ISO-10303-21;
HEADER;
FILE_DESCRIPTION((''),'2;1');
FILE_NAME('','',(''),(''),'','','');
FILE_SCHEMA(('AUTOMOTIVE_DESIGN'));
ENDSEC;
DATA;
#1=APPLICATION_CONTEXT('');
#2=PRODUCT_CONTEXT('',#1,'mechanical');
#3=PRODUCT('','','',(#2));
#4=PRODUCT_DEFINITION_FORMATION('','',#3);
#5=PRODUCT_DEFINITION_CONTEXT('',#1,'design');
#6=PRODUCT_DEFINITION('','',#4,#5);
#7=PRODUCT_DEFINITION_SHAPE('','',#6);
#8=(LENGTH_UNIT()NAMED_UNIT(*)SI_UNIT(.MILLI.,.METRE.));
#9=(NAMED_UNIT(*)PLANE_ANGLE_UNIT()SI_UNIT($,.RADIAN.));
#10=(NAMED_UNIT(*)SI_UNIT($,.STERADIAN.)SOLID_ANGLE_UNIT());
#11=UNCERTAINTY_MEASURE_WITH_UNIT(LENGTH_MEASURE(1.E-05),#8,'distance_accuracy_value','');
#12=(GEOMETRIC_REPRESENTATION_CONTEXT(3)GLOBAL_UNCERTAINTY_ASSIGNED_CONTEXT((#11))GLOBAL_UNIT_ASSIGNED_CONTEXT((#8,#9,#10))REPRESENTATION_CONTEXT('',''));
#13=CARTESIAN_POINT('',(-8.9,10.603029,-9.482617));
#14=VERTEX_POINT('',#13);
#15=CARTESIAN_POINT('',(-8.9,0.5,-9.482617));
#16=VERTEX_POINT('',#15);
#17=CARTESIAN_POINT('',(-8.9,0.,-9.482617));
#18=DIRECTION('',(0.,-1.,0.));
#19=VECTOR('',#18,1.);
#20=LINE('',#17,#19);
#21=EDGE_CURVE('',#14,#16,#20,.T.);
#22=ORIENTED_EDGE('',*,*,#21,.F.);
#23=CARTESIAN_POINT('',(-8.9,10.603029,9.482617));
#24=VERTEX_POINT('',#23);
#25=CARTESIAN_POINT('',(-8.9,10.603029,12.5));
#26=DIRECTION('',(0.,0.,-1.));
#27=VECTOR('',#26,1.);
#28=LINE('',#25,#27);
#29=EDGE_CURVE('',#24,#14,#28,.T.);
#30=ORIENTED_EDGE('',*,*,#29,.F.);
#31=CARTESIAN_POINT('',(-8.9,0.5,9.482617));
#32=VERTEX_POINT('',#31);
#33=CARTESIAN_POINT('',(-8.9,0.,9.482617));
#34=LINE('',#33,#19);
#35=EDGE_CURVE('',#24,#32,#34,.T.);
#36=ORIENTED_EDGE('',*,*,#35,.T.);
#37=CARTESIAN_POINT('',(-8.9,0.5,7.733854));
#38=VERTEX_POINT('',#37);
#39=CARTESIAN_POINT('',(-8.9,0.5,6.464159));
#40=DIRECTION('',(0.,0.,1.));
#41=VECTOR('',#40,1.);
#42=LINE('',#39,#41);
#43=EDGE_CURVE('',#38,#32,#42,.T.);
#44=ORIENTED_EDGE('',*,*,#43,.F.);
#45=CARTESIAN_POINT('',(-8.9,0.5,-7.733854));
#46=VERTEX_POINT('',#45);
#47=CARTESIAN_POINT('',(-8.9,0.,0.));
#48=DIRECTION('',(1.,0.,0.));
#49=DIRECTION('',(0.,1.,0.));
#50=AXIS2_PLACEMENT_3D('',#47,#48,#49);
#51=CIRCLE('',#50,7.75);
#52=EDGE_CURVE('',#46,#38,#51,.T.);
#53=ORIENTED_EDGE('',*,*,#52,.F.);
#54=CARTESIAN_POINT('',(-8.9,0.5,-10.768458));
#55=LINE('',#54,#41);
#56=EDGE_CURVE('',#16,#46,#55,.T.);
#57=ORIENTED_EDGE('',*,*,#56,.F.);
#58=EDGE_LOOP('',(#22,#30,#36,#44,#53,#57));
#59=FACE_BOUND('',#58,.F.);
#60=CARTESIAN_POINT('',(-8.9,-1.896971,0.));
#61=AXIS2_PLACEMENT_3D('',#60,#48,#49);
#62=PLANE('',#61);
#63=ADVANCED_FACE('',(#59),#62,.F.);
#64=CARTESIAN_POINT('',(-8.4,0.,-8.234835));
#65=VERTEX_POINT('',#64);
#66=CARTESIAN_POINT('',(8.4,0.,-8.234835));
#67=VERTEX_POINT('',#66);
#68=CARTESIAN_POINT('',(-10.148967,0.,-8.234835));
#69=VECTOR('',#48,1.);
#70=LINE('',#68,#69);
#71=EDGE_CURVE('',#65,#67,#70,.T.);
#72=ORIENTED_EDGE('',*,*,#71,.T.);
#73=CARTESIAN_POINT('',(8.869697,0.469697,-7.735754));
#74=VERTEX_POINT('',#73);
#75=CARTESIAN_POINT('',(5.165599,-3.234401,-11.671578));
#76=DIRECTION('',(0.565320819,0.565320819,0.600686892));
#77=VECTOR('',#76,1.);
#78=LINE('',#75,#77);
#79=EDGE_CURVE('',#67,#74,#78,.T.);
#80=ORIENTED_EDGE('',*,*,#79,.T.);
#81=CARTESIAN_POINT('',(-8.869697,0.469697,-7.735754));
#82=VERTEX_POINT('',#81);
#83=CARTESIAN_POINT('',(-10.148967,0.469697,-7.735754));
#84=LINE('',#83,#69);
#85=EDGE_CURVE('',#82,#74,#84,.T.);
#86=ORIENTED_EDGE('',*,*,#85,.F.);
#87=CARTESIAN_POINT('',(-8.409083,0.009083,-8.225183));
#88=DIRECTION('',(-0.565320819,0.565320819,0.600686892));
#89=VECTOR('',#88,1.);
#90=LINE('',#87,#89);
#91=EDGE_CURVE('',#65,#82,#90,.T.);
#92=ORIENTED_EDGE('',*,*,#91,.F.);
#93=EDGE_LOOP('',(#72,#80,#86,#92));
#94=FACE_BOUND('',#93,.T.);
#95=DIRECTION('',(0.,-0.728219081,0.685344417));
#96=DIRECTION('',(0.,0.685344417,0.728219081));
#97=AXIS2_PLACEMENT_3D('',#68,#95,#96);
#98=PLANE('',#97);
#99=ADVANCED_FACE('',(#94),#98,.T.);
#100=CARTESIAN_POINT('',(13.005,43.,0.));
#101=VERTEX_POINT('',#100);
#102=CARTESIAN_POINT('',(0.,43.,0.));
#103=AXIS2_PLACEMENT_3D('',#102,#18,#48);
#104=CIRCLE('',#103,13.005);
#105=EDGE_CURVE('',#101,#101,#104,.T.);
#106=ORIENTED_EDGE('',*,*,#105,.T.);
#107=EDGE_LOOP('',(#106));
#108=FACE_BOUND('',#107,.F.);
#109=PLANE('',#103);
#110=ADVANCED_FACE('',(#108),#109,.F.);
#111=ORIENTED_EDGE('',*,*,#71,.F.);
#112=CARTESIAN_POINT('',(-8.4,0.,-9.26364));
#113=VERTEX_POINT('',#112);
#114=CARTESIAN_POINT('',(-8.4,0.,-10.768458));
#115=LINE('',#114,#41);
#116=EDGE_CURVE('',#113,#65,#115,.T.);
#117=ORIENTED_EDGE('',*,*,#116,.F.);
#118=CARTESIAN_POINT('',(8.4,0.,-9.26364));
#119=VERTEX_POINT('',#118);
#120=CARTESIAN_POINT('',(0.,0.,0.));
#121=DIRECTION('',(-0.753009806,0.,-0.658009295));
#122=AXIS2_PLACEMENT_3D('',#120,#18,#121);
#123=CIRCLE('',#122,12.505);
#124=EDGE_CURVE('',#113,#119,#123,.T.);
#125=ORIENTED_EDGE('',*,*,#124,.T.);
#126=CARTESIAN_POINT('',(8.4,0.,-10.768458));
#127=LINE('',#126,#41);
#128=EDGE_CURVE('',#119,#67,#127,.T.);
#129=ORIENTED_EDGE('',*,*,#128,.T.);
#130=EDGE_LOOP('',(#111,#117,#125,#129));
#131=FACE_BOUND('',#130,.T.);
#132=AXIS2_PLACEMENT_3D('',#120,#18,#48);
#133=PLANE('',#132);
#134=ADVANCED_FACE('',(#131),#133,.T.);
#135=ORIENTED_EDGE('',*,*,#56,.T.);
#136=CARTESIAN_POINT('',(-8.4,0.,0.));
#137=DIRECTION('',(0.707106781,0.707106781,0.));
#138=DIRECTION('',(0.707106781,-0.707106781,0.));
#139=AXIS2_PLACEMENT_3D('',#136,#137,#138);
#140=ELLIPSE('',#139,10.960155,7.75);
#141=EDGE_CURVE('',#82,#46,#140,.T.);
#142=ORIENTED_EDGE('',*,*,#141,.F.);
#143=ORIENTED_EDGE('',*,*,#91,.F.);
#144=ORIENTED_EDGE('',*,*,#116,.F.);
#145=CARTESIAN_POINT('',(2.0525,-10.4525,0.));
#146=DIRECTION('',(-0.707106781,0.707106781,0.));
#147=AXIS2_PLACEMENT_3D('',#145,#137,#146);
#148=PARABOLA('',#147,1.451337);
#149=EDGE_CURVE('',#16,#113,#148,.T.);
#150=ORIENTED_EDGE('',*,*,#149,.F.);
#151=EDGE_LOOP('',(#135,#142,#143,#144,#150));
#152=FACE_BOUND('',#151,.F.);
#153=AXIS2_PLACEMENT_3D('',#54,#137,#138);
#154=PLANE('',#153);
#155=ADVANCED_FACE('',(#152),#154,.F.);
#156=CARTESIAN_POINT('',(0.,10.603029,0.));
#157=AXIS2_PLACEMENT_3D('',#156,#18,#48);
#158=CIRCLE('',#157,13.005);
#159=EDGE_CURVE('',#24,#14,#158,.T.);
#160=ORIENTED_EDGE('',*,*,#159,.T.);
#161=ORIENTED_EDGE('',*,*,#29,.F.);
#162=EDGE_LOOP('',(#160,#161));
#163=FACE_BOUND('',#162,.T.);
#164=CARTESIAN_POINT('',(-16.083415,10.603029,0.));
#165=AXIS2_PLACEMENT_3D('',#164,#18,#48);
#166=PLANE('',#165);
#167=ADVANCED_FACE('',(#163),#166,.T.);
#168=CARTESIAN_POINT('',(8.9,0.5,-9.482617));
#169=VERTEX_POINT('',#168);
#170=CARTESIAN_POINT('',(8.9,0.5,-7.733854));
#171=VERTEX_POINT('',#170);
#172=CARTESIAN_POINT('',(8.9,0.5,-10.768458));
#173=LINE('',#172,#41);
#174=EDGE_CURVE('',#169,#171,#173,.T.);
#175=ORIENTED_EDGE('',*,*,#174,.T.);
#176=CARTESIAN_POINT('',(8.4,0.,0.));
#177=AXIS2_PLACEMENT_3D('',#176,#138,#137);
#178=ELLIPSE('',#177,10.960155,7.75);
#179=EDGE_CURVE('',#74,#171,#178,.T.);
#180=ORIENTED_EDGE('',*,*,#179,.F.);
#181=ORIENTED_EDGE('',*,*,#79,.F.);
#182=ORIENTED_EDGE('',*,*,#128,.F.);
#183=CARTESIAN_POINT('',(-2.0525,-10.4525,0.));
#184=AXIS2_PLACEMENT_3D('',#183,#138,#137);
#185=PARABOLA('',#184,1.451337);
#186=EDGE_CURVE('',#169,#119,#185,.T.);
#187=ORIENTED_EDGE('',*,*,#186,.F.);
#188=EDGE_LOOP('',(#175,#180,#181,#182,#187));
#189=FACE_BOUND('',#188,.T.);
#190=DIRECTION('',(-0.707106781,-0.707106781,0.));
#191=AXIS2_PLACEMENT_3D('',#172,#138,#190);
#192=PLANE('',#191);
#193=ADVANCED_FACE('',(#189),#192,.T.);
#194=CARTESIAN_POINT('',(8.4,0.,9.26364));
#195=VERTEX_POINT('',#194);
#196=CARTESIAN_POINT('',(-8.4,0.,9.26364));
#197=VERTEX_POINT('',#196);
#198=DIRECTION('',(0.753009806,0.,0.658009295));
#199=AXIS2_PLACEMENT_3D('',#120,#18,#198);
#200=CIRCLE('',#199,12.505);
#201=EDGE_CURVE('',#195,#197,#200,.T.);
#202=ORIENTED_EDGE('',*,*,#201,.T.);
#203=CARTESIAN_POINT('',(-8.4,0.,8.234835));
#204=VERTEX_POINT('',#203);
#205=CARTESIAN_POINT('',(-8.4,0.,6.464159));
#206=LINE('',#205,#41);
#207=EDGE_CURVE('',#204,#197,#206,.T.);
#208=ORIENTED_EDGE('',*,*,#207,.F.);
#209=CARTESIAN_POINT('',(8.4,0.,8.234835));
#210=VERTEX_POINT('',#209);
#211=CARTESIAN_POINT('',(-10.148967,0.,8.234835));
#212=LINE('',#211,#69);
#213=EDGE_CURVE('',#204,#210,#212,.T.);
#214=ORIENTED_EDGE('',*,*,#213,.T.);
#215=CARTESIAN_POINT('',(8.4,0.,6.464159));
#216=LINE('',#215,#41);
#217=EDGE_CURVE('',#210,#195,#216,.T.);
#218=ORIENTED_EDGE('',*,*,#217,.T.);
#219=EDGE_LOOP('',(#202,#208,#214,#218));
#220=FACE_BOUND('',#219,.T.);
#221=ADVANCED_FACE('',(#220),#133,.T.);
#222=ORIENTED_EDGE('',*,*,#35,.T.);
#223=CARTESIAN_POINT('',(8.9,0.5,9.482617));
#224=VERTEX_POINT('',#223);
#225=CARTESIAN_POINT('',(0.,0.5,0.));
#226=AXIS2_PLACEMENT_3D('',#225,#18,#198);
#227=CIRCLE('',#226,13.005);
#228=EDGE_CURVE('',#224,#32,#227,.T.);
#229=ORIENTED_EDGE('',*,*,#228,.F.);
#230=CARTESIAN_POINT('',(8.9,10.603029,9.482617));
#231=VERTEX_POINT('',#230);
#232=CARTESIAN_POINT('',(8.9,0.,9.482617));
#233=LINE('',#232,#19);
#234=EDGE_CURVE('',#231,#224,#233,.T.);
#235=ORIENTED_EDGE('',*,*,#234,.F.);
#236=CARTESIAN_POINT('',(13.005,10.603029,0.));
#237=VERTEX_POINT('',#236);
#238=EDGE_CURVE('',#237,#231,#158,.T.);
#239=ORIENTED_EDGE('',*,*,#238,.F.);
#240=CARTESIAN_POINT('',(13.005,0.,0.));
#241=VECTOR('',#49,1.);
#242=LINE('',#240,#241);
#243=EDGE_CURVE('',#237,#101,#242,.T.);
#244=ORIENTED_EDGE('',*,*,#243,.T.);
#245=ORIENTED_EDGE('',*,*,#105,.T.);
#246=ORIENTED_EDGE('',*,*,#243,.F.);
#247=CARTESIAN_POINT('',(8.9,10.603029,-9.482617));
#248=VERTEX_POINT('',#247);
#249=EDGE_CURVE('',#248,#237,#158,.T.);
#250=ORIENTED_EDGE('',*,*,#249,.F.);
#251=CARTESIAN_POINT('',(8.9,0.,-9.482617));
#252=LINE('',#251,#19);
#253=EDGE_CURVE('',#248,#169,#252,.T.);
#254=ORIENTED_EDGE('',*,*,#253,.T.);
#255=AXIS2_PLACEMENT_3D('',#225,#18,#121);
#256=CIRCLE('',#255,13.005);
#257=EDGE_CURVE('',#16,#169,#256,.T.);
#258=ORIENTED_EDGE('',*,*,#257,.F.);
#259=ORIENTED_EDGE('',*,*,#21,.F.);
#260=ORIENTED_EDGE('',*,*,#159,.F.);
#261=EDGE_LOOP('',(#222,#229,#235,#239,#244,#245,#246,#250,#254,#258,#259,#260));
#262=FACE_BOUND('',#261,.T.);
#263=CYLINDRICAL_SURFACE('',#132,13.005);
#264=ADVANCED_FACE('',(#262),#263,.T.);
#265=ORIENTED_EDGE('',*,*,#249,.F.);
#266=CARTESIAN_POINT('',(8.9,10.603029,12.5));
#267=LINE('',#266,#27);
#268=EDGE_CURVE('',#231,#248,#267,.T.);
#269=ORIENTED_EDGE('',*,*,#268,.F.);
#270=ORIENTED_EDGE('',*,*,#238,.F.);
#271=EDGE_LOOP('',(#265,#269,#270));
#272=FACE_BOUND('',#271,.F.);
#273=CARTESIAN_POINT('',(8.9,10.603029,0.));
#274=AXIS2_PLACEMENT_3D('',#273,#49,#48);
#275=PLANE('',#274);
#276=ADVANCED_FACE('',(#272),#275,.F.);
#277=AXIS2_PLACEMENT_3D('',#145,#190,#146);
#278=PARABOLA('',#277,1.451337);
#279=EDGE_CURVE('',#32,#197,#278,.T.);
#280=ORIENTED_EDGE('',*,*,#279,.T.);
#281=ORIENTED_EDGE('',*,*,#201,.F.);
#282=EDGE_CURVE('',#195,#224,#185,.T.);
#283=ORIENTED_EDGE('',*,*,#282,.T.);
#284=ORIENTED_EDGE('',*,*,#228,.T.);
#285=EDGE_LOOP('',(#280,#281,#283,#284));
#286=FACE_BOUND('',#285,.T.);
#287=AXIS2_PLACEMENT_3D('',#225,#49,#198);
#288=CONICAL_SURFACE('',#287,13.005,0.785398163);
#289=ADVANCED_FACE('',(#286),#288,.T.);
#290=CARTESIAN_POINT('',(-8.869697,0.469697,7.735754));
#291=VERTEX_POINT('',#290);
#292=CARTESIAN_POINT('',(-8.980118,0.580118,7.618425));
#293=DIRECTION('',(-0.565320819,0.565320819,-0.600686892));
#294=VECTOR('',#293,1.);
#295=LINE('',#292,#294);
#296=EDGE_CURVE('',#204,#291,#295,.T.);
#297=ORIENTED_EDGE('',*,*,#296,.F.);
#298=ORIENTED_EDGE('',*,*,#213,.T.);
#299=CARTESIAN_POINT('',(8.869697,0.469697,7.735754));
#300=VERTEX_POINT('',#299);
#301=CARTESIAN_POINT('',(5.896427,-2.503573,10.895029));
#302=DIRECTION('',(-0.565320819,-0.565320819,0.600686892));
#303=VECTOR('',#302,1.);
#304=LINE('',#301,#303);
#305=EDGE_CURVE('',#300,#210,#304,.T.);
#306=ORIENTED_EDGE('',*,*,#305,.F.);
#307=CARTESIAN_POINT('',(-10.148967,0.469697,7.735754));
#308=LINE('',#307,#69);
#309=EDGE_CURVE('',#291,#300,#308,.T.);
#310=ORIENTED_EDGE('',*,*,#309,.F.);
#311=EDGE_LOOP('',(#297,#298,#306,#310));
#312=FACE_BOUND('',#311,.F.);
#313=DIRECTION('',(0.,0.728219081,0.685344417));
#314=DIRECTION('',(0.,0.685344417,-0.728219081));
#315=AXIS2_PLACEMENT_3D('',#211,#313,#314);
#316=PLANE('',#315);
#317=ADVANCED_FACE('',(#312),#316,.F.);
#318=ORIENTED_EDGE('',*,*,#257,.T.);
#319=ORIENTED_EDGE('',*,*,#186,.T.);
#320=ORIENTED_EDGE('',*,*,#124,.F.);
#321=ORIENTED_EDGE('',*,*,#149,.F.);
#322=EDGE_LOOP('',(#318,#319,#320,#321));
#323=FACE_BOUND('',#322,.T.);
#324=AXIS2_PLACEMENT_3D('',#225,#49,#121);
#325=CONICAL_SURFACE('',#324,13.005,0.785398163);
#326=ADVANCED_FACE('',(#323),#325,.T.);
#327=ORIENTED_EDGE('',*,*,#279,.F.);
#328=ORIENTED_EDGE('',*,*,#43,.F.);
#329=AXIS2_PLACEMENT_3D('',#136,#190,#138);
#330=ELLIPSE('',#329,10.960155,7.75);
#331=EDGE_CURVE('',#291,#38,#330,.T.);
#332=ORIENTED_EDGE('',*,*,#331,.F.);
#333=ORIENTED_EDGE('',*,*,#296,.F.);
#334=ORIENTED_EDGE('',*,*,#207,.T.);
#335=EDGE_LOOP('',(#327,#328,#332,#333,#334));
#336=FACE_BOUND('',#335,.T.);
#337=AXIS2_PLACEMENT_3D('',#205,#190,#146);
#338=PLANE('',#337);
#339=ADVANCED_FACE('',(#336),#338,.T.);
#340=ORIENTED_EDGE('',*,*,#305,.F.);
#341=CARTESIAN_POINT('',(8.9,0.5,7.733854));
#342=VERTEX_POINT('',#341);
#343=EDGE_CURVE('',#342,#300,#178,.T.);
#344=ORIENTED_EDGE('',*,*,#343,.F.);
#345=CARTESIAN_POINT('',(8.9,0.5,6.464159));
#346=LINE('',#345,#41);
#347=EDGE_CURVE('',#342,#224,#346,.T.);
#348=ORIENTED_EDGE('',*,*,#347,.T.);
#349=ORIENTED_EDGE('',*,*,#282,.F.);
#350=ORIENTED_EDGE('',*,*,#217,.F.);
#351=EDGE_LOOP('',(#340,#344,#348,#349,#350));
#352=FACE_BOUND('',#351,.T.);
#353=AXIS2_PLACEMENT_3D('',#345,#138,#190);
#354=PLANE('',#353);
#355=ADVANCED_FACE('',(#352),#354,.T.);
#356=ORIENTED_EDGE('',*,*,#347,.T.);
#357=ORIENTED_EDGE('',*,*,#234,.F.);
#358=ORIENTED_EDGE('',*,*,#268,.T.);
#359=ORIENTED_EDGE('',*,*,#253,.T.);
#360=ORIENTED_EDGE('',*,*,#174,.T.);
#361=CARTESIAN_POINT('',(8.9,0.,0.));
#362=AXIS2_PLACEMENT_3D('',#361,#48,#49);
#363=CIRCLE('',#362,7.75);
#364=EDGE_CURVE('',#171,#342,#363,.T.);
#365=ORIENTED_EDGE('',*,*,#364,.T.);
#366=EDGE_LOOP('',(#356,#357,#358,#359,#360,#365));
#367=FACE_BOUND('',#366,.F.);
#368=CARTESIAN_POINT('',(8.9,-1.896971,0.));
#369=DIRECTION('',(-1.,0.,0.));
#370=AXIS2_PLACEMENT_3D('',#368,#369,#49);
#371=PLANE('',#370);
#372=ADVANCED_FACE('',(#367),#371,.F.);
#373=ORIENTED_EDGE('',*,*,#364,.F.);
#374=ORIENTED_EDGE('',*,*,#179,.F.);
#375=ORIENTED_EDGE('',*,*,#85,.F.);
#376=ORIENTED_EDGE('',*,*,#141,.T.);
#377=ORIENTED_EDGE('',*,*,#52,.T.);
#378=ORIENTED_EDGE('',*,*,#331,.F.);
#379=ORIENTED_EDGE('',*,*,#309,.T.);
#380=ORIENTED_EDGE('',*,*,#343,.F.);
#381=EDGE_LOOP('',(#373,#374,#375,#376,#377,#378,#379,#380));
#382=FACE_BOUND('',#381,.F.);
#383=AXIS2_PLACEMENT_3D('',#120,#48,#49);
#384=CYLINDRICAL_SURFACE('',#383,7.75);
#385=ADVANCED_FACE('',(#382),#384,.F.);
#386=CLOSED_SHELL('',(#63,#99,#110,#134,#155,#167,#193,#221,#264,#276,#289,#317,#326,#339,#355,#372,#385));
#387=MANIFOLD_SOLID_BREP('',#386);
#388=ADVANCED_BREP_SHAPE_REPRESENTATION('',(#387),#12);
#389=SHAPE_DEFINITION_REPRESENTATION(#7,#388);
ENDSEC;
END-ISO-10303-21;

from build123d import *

# Parameters (mm, degrees)
F0_R          = 13.005
F1_DEPTH      = 43
F2_R          = 7.75
F3_DEPTH      = 13.006
F3_DEPTH_BACK = 25
F4_W          = 7.1834153318
F4_H          = 12.5
F5_DEPTH      = 12.5
F6_T1_DEPTH   = 4.3042999791
F6_T3_DEPTH   = 20.2979349857
F6_T5_DEPTH   = 4.3042999791
F6_T8_ANGLE   = 97.7035470752
F6_T10_ANGLE  = 97.7035470752


# Not quite as in the source:
# - a fillet or chamfer that OpenCascade refuses, or shapes differently, is made with other operations: its cross-section is extruded or revolved along the edge and cut away or added


with BuildPart() as f1:
    # F0 (on Front) → F1 (new body)
    with BuildSketch(Plane.XZ):
        Circle(F0_R)
    extrude(amount=-F1_DEPTH)

    # F2 (on Right) → F3 (cut, two sides)
    with BuildSketch(Plane.YZ) as f3_sk:
        Circle(F2_R)
    extrude(amount=-F3_DEPTH, mode=Mode.SUBTRACT)
    extrude(f3_sk.sketch, amount=F3_DEPTH_BACK, mode=Mode.SUBTRACT)

    # F4 (on Top) → F5 (cut, symmetric)
    with BuildSketch(Plane.XY):
        with Locations((12.4917076659, 4.3530291878)):
            Rectangle(F4_W, F4_H)
        with Locations((-12.4917076659, 4.3530291878)):
            Rectangle(F4_W, F4_H)
    extrude(amount=F5_DEPTH, both=True, mode=Mode.SUBTRACT)

    # F6: chamfer of 0.5 on 8 edges, made by hand

    # F6_s2 → F6_t1 (cut)
    with BuildSketch(Plane.XY.offset(6.464158506)):
        Polygon((-8.4, 0), (-8.9, 0.5), (-8.9, 0), align=None)
        Polygon((8.9, 0.5), (8.4, 0), (8.9, 0), align=None)
    extrude(amount=F6_T1_DEPTH, mode=Mode.SUBTRACT)

    # F6_s4 → F6_t3 (cut)
    with BuildSketch(Plane.YZ.offset(-10.1489674928)):
        with BuildLine():
            Line((0, 8.234834546), (0.4696969697, 7.7357536644))
            ThreePointArc((0.4696969697, 7.7357536644), (0.2420339134, 7.7462196964), (0, 7.75))
            Line((0, 7.75), (0, 8.234834546))
        make_face()
        with BuildLine():
            Line((0, -8.234834546), (0.4696969697, -7.7357536644))
            ThreePointArc((0.4696969697, -7.7357536644), (0.2420339134, -7.7462196964), (0, -7.75))
            Line((0, -7.75), (0, -8.234834546))
        make_face()
    extrude(amount=F6_T3_DEPTH, mode=Mode.SUBTRACT)

    # F6_s6 → F6_t5 (cut)
    with BuildSketch(Plane.XY.offset(-10.7684584851)):
        Polygon((-8.9, 0.5), (-8.4, 0), (-8.9, 0), align=None)
        Polygon((8.9, 0.5), (8.4, 0), (8.9, 0), align=None)
    extrude(amount=F6_T5_DEPTH, mode=Mode.SUBTRACT)

    # F6_s7 → F6_t8 (revolve, cut)
    with BuildSketch(Plane(origin=(0, 0, 0), x_dir=(0, 1, 0), z_dir=(0.6580092951, 0, -0.7530098057))):
        Polygon((0.5, 13.005), (0, 12.505), (0, 13.005), align=None)
    revolve(axis=Axis((0, 0, 0), (0, -1, 0)), revolution_arc=F6_T8_ANGLE, mode=Mode.SUBTRACT)

    # F6_s9 → F6_t10 (revolve, cut)
    with BuildSketch(Plane(origin=(0, 0, 0), x_dir=(0, 1, 0), z_dir=(-0.6580092951, 0, 0.7530098057))):
        Polygon((0.5, 13.005), (0, 12.505), (0, 13.005), align=None)
    revolve(axis=Axis((0, 0, 0), (0, -1, 0)), revolution_arc=F6_T10_ANGLE, mode=Mode.SUBTRACT)


solid = f1.part
